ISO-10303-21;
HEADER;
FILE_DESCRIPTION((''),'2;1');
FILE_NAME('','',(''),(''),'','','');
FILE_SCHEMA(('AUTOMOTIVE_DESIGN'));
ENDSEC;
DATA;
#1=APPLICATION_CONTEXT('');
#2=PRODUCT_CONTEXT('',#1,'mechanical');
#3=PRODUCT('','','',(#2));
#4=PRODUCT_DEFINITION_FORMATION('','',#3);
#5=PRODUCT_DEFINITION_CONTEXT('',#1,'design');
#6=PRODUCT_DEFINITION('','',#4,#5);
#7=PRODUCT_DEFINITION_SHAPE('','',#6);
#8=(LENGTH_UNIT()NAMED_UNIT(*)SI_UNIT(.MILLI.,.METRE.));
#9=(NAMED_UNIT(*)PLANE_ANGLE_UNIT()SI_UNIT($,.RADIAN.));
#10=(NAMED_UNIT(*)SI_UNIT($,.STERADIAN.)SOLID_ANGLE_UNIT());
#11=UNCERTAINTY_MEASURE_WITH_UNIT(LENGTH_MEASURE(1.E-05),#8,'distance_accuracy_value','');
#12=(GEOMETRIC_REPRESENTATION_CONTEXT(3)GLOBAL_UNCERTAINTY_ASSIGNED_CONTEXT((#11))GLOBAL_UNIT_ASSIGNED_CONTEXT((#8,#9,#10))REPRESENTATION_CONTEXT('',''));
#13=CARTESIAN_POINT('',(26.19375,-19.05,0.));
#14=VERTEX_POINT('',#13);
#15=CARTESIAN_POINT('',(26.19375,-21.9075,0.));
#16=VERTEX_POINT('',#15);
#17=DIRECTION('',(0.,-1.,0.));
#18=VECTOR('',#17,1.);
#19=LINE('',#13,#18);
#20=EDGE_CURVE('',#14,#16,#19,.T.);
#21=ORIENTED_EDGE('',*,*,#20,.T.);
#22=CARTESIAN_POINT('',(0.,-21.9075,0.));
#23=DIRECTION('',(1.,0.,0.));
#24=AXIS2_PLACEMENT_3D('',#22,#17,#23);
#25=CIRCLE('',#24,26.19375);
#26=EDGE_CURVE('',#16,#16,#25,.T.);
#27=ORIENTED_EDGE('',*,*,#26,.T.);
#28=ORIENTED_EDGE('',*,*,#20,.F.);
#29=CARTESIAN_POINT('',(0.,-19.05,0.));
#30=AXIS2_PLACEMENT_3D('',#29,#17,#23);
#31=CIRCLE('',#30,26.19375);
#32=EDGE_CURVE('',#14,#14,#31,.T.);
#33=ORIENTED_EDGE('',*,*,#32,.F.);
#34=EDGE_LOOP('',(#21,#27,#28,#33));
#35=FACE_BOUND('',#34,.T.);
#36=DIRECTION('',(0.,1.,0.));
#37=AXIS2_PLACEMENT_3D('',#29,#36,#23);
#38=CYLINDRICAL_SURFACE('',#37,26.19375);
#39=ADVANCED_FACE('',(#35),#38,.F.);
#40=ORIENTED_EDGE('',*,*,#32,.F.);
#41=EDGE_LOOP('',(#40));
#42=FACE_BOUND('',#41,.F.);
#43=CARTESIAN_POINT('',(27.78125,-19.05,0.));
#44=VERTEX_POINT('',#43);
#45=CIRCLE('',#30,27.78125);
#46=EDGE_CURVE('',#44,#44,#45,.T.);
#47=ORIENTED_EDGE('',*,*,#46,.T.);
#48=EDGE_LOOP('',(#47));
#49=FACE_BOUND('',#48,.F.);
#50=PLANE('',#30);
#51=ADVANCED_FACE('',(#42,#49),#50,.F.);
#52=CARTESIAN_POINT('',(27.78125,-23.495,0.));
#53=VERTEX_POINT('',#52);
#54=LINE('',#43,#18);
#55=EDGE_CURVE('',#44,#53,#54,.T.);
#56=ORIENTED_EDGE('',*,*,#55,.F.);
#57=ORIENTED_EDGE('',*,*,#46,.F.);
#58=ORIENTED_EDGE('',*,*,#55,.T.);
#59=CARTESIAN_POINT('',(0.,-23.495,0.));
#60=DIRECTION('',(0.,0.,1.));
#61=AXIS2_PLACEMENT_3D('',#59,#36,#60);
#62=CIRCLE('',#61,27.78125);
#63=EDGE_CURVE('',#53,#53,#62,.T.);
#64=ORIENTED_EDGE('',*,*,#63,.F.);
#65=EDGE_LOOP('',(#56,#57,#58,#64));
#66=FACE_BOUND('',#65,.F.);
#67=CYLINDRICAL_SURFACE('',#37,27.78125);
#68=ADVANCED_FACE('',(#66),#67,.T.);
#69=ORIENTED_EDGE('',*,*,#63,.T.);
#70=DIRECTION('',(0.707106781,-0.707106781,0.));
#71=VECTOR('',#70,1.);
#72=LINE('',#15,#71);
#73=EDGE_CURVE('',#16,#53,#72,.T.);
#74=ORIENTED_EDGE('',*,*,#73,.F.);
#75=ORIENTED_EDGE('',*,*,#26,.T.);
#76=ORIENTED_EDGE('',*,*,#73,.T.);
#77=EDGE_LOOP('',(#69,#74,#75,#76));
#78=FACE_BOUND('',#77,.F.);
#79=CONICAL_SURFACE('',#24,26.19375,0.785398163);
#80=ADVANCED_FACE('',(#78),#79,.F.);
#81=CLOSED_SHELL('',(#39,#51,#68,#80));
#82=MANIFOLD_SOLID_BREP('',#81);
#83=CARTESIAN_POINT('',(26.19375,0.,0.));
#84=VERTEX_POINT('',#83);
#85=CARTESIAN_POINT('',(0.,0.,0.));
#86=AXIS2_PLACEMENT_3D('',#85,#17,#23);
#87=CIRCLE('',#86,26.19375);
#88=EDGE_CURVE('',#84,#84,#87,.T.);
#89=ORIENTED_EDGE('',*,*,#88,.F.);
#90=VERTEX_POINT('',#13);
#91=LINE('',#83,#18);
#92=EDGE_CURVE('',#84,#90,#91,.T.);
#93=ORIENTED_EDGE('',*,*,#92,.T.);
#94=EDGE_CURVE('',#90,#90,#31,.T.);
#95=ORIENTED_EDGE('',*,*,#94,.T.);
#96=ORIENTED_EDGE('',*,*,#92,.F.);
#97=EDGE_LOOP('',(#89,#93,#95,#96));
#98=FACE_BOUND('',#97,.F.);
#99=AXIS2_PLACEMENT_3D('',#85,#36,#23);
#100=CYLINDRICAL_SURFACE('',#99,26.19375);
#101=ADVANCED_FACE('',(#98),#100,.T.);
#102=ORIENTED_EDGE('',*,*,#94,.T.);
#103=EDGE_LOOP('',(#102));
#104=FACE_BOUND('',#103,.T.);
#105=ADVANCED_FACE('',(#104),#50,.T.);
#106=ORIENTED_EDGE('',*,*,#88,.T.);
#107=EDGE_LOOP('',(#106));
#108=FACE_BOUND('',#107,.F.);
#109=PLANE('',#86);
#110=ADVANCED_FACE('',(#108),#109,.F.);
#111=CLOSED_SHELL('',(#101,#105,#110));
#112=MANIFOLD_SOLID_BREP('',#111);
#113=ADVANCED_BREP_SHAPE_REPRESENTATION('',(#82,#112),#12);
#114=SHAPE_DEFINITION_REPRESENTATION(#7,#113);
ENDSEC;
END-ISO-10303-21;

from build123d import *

# Parameters (mm, degrees)
F0_R     = 26.19375
F1_DEPTH = 19.05
F2_R     = 27.78125
F2_R_2   = 26.19375
F3_DEPTH = 7.9375


# Not quite as in the source:
# - a fillet or chamfer that OpenCascade refuses, or shapes differently, is made with other operations: its cross-section is extruded or revolved along the edge and cut away or added


with BuildPart() as f1:
    # F0 (on Front) → F1 (new body)
    with BuildSketch(Plane.XZ):
        Circle(F0_R)
    extrude(amount=F1_DEPTH)


with BuildPart() as f3:
    # F2 (on face) → F3 (new body)
    with BuildSketch(Plane.XZ.offset(19.05)):
        Circle(F2_R)
        Circle(F2_R_2, mode=Mode.SUBTRACT)
    extrude(amount=F3_DEPTH)

    # F4: chamfer of 5.08 on 1 edges, made by hand

    # F4_s1 → F4_t2 (revolve, cut)
    with BuildSketch(Plane.XY):
        Polygon((26.19375, -21.9075), (31.27375, -26.9875), (26.19375, -26.9875), align=None)
    revolve(axis=Axis((0, -26.9875, 0), (0, -1, 0)), mode=Mode.SUBTRACT)


solid = Compound([f1.part, f3.part])
